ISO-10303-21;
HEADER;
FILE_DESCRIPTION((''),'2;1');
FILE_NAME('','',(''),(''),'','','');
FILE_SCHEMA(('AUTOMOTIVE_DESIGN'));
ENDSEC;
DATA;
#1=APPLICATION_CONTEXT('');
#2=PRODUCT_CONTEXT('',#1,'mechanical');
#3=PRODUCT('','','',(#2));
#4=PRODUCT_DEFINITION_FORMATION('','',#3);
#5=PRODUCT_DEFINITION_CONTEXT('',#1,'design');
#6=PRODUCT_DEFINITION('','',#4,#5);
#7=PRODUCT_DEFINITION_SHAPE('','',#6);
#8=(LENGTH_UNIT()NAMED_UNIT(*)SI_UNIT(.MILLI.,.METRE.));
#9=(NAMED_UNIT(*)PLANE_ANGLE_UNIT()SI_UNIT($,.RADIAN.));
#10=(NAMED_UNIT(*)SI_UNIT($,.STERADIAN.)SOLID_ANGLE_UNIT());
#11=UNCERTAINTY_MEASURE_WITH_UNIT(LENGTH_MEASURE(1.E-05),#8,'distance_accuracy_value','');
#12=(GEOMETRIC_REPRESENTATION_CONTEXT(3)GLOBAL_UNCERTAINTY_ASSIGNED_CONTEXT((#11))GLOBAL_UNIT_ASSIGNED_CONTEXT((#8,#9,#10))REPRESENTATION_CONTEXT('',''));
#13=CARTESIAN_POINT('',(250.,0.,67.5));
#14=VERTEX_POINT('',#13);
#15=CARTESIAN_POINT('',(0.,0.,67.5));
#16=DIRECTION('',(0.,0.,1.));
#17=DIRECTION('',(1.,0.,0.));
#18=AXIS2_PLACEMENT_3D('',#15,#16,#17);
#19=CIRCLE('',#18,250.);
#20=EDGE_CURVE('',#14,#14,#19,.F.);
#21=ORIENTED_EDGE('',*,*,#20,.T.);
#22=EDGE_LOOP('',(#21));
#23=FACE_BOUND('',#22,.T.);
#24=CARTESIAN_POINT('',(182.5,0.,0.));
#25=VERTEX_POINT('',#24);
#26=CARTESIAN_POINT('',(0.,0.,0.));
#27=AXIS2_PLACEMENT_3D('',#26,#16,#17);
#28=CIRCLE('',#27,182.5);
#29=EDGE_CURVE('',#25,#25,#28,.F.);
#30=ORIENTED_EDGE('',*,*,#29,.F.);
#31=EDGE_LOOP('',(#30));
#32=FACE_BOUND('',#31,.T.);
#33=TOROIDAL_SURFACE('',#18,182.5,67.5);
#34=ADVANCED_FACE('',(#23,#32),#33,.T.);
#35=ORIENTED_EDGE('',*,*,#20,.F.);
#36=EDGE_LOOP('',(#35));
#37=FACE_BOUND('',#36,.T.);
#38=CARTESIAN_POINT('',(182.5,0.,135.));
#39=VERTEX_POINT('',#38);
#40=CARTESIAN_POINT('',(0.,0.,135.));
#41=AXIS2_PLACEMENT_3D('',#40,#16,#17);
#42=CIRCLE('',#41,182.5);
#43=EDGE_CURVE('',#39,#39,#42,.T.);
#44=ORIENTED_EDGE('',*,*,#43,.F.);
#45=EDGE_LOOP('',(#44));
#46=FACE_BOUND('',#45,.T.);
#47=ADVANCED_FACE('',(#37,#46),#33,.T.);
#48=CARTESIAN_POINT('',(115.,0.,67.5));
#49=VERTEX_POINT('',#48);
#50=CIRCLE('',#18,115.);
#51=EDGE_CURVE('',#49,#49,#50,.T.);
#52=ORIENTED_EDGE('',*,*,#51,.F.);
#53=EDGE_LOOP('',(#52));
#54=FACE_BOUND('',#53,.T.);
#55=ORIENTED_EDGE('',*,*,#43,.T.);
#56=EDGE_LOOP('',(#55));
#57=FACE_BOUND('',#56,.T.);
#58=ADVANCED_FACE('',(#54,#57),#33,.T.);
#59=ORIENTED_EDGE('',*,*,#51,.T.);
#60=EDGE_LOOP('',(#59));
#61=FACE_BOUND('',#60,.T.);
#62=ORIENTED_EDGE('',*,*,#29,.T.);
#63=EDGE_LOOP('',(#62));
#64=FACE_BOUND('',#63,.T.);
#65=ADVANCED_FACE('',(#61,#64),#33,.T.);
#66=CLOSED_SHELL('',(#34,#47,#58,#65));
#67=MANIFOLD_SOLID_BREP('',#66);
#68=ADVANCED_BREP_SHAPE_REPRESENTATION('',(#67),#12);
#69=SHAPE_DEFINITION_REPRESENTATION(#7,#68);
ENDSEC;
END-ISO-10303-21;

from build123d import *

# Parameters (mm, degrees)
SKETCH_1_R      = 250
SKETCH_1_R_2    = 115
EXTRUDE_1_DEPTH = 135
FILLET_1_R      = 67.5


with BuildPart() as part:
    # 草图1 → 凸台-拉伸1 (new body)
    with BuildSketch(Plane.XY):
        Circle(SKETCH_1_R)
        Circle(SKETCH_1_R_2, mode=Mode.SUBTRACT)
    extrude(amount=EXTRUDE_1_DEPTH)

    # 圆角1
    fillet_1_edges = [part.edges().sort_by_distance(p)[0] for p in [
        (-250, 0, 0),
        (-250, 0, 135),
        (-115, 0, 0),
        (-115, 0, 135),
    ]]
    fillet(fillet_1_edges, radius=FILLET_1_R - 0.0001)  # a hair under: the kernel refuses the full size


solid = part.part
